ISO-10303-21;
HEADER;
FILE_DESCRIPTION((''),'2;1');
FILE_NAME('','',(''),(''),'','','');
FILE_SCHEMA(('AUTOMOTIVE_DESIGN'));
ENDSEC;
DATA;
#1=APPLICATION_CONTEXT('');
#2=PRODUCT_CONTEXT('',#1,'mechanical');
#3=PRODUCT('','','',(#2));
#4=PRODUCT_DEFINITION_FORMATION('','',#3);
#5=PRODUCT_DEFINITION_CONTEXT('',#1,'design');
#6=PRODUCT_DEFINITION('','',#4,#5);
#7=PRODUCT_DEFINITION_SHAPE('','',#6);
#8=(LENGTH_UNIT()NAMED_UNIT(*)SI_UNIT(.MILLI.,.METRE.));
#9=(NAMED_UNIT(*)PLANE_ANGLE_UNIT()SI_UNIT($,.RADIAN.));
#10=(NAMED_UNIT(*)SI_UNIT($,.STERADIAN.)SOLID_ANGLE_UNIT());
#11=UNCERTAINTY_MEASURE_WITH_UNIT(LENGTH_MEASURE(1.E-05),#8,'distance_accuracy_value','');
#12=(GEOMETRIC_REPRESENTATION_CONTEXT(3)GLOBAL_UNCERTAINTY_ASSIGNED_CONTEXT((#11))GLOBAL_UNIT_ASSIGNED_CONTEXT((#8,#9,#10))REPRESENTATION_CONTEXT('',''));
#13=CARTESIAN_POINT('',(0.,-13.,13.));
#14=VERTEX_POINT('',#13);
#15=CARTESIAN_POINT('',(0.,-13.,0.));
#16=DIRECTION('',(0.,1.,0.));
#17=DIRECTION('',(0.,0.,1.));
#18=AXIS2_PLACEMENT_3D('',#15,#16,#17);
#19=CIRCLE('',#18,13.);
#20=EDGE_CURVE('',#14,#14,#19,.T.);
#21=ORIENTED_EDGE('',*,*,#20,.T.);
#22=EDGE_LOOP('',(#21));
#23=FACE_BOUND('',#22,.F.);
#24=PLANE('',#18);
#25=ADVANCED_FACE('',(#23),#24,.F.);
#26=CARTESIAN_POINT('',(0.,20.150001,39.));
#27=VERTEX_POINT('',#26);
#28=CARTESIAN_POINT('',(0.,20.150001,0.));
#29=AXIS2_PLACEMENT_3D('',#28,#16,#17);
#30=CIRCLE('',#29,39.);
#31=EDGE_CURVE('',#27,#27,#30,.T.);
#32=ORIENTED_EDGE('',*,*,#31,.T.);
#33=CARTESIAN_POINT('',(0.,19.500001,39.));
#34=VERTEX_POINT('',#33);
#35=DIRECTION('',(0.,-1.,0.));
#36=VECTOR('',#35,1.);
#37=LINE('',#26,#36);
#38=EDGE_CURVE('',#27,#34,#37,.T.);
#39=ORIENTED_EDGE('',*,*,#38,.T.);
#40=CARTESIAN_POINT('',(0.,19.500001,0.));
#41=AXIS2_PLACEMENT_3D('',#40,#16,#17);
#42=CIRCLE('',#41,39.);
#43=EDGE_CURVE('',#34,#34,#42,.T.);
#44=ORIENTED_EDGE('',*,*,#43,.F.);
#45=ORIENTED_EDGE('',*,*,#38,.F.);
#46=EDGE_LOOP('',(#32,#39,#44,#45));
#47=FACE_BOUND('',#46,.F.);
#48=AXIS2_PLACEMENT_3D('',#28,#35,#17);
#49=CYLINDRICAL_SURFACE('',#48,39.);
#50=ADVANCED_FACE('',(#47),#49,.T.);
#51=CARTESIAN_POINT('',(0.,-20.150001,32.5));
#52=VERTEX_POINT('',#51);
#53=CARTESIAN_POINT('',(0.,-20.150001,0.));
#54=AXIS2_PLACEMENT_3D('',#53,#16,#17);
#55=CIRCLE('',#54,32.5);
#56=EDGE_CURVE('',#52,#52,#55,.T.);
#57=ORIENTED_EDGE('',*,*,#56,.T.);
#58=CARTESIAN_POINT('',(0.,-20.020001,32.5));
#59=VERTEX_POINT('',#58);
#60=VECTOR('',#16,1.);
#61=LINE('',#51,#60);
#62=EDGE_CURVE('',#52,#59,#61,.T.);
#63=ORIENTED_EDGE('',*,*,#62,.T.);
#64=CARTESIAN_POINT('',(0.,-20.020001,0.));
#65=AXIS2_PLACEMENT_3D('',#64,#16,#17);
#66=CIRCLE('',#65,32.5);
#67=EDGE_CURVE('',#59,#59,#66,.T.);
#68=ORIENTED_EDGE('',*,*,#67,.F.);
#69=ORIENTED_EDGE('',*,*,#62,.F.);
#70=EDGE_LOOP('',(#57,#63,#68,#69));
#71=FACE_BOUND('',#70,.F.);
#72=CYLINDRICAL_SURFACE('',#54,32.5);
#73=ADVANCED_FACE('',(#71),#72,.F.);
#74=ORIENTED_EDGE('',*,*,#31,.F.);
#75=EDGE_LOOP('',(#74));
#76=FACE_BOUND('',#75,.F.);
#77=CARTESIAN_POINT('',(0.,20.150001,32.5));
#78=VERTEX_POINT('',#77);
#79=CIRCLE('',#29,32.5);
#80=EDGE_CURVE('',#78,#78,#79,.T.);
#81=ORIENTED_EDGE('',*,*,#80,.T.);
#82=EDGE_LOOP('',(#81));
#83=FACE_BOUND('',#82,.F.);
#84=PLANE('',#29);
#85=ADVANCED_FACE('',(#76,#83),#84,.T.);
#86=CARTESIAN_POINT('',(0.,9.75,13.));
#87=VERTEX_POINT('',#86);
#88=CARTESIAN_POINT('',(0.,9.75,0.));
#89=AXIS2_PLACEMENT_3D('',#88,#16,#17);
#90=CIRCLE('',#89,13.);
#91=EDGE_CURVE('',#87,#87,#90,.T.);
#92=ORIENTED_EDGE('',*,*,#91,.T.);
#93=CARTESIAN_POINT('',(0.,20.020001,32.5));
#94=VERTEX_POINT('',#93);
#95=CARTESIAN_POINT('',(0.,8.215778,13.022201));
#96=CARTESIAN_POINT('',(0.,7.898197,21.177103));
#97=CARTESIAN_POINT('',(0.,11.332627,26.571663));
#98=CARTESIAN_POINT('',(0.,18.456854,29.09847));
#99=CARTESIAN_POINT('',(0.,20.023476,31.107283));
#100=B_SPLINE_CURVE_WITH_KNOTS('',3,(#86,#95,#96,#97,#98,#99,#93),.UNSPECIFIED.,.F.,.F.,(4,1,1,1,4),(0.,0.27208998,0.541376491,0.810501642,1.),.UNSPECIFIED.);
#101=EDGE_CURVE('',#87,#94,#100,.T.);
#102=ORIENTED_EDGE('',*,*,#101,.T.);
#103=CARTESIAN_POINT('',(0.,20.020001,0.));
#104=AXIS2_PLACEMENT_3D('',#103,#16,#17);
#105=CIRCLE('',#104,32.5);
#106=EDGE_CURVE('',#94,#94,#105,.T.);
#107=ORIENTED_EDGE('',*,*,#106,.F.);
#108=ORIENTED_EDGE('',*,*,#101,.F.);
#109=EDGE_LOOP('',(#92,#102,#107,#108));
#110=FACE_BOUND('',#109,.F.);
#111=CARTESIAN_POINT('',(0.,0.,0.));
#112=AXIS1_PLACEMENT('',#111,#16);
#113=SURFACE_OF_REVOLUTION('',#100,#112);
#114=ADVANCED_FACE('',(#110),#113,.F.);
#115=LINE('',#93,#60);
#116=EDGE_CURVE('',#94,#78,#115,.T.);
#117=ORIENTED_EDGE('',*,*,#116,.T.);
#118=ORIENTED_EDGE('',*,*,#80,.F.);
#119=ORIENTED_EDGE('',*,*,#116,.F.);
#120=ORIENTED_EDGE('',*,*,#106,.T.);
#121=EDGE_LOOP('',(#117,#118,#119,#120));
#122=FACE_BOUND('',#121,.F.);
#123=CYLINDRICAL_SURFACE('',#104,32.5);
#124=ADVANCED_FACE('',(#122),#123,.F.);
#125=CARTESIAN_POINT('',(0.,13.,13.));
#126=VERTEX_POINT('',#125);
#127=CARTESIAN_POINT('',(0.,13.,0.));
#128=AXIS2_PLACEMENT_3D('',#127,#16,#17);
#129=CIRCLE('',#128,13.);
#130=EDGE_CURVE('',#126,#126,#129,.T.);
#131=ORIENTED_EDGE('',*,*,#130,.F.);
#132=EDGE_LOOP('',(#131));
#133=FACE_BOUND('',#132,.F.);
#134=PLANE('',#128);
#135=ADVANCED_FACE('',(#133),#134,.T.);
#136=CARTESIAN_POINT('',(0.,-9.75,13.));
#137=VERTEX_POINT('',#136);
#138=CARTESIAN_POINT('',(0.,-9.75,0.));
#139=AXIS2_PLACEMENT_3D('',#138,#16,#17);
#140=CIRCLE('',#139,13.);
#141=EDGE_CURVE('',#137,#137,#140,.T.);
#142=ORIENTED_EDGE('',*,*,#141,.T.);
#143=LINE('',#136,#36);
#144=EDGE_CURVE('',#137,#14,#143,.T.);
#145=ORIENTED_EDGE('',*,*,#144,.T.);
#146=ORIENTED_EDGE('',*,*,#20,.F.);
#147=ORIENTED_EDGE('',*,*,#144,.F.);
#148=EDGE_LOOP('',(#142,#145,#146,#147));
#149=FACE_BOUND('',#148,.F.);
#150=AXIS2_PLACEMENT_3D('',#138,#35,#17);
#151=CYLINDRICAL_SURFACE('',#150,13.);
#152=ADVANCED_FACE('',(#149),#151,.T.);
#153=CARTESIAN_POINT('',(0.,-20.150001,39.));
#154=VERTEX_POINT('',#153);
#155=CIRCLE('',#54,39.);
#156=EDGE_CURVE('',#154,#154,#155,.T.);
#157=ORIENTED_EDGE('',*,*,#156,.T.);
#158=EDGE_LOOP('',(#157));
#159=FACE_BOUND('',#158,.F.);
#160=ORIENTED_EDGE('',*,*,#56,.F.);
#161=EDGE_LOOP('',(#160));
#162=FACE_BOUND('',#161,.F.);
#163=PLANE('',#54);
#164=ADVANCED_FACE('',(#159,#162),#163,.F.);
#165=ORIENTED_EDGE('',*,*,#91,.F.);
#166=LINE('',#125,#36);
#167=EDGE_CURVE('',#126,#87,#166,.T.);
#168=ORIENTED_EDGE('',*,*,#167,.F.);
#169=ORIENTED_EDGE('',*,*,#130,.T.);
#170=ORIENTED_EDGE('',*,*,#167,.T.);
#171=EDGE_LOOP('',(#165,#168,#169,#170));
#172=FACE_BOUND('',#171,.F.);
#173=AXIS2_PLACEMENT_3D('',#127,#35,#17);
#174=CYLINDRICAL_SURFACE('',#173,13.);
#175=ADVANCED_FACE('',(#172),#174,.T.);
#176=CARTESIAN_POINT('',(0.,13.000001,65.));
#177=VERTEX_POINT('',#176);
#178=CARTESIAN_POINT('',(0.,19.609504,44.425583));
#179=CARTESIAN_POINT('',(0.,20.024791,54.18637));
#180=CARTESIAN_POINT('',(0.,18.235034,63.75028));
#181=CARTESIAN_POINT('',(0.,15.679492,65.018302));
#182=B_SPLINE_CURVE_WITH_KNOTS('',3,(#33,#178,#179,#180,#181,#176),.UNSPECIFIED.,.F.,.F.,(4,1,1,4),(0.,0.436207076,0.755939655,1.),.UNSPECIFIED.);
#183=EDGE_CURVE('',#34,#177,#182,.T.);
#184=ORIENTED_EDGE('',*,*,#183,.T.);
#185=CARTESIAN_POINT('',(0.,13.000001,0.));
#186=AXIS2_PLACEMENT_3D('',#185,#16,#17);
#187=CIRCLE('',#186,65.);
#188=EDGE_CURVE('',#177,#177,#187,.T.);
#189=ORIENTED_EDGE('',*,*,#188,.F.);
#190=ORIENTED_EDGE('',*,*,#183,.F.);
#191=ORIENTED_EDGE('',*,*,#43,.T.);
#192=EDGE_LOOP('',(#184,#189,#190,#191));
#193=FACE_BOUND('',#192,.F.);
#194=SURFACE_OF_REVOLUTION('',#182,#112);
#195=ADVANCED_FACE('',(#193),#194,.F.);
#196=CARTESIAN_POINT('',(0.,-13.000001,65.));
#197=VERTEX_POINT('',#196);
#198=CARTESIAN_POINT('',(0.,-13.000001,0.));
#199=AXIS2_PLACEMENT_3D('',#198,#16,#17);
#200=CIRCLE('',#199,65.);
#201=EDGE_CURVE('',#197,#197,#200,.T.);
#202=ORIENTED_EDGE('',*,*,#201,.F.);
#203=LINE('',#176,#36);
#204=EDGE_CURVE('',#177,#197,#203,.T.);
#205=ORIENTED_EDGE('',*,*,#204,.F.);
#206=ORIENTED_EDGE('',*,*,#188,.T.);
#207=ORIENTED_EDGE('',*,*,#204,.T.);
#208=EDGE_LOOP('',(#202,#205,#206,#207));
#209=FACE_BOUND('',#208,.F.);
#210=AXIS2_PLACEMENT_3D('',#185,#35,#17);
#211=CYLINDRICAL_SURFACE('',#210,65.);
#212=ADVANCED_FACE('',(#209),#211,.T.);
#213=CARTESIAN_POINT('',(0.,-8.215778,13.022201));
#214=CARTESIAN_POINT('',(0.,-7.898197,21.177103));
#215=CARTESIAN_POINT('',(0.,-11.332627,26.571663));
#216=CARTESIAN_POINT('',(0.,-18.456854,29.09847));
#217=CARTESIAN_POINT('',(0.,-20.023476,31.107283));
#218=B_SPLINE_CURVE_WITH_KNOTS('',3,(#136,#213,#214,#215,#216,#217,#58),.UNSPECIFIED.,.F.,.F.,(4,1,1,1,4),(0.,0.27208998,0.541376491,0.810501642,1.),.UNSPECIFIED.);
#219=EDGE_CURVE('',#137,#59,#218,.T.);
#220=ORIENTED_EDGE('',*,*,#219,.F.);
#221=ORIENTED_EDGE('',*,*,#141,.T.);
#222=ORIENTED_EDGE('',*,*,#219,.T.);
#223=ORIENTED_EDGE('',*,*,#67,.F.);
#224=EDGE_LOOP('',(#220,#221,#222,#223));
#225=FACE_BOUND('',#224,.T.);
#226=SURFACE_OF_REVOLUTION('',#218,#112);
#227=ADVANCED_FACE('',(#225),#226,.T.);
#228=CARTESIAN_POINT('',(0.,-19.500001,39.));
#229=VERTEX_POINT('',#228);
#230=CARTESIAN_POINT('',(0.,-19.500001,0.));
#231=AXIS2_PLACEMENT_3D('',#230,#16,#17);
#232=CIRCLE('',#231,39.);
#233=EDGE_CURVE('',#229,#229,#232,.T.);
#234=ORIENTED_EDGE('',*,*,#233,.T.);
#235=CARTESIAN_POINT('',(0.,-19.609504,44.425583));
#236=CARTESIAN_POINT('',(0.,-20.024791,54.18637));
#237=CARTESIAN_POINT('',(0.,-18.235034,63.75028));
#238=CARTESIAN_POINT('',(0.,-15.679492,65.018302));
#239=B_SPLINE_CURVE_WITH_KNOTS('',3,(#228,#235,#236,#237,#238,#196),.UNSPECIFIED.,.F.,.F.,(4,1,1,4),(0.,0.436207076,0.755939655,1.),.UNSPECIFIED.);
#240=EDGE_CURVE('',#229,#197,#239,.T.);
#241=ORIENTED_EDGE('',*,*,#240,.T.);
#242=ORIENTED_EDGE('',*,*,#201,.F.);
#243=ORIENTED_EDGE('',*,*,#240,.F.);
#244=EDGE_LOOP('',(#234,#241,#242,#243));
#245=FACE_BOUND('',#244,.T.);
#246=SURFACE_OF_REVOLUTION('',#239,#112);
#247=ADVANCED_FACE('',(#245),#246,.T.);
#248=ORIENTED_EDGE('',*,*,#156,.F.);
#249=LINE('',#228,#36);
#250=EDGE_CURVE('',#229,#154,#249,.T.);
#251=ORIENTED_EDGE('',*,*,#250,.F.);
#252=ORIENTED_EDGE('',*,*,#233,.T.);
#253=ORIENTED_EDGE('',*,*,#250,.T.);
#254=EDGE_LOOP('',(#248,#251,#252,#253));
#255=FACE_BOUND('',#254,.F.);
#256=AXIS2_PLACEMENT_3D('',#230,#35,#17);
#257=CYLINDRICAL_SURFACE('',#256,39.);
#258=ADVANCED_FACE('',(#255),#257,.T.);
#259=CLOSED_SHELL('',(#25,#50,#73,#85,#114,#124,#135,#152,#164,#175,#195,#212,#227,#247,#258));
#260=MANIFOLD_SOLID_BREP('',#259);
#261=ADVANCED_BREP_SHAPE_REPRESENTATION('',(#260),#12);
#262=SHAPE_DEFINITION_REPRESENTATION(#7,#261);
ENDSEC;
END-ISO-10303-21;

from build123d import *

# Parameters (mm, degrees)
F4_SCALE = 1.3


# Not quite as in the source:
# - ends of sketch curves that miss each other by under 0.0002 mm in the source are joined
# - a feature of the source that left no trace in its solid (it failed there, or was rolled back) is left out


with BuildPart() as f1:
    # F0 (on Right) → F1 (revolve)
    with BuildSketch(Plane.YZ):
        with BuildLine():
            Line((-10, 10), (-10, 0))
            Line((-10, 0), (10, 0))
            Line((10, 0), (10, 10))
            Line((10, 10), (7.5, 10))
            add(Edge.make_bspline(
                [(7.5, 10), (6.3198292539, 10.0170777093), (6.0755360942, 16.2900794914), (8.71740503, 20.4397404153), (14.1975799439, 22.3834382863), (15.4026740679, 23.9286791718), (15.4000005056, 25)],
                knots=[0, 0, 0, 0, 0.2720899799, 0.5413764913, 0.8105016424, 1, 1, 1, 1], degree=3))
            Line((15.4000005056, 25), (15.5000005056, 25))
            Line((15.5000005056, 25), (15.5000005056, 30))
            Line((15.5000005056, 30), (15.0000005056, 30))
            add(Edge.make_bspline(
                [(15.0000005056, 30), (15.0842336639, 34.1735254493), (15.4036855603, 41.6818231934), (14.026949329, 49.0386767347), (12.0611475076, 50.0140784293), (10.0000005056, 50)],
                knots=[0, 0, 0, 0, 0.4362070764, 0.7559396549, 1, 1, 1, 1], degree=3))
            Line((10.0000005056, 50), (5.056e-07, 50))
            Line((5.056e-07, 50), (-10.0000005056, 50))
            add(Edge.make_bspline(
                [(-15.0000005056, 30), (-15.0842336639, 34.1735254493), (-15.4036855603, 41.6818231934), (-14.026949329, 49.0386767347), (-12.0611475076, 50.0140784293), (-10.0000005056, 50)],
                knots=[0, 0, 0, 0, 0.4362070764, 0.7559396549, 1, 1, 1, 1], degree=3))
            Line((-15.0000005056, 30), (-15.5000005056, 30))
            Line((-15.5000005056, 30), (-15.5000005056, 25))
            Line((-15.5000005056, 25), (-15.4000005056, 25))
            add(Edge.make_bspline(
                [(-7.5, 10), (-6.3198292539, 10.0170777093), (-6.0755360942, 16.2900794914), (-8.71740503, 20.4397404153), (-14.1975799439, 22.3834382863), (-15.4026740679, 23.9286791718), (-15.4000005056, 25)],
                knots=[0, 0, 0, 0, 0.2720899799, 0.5413764913, 0.8105016424, 1, 1, 1, 1], degree=3))
            Line((-7.5, 10), (-10, 10))
        make_face()
    revolve(axis=Axis((0, 0, 0), (0, 1, 0)))


with BuildPart() as f1_1:
    # F4: moved
    add(f1.part.scale(F4_SCALE))


solid = f1_1.part
